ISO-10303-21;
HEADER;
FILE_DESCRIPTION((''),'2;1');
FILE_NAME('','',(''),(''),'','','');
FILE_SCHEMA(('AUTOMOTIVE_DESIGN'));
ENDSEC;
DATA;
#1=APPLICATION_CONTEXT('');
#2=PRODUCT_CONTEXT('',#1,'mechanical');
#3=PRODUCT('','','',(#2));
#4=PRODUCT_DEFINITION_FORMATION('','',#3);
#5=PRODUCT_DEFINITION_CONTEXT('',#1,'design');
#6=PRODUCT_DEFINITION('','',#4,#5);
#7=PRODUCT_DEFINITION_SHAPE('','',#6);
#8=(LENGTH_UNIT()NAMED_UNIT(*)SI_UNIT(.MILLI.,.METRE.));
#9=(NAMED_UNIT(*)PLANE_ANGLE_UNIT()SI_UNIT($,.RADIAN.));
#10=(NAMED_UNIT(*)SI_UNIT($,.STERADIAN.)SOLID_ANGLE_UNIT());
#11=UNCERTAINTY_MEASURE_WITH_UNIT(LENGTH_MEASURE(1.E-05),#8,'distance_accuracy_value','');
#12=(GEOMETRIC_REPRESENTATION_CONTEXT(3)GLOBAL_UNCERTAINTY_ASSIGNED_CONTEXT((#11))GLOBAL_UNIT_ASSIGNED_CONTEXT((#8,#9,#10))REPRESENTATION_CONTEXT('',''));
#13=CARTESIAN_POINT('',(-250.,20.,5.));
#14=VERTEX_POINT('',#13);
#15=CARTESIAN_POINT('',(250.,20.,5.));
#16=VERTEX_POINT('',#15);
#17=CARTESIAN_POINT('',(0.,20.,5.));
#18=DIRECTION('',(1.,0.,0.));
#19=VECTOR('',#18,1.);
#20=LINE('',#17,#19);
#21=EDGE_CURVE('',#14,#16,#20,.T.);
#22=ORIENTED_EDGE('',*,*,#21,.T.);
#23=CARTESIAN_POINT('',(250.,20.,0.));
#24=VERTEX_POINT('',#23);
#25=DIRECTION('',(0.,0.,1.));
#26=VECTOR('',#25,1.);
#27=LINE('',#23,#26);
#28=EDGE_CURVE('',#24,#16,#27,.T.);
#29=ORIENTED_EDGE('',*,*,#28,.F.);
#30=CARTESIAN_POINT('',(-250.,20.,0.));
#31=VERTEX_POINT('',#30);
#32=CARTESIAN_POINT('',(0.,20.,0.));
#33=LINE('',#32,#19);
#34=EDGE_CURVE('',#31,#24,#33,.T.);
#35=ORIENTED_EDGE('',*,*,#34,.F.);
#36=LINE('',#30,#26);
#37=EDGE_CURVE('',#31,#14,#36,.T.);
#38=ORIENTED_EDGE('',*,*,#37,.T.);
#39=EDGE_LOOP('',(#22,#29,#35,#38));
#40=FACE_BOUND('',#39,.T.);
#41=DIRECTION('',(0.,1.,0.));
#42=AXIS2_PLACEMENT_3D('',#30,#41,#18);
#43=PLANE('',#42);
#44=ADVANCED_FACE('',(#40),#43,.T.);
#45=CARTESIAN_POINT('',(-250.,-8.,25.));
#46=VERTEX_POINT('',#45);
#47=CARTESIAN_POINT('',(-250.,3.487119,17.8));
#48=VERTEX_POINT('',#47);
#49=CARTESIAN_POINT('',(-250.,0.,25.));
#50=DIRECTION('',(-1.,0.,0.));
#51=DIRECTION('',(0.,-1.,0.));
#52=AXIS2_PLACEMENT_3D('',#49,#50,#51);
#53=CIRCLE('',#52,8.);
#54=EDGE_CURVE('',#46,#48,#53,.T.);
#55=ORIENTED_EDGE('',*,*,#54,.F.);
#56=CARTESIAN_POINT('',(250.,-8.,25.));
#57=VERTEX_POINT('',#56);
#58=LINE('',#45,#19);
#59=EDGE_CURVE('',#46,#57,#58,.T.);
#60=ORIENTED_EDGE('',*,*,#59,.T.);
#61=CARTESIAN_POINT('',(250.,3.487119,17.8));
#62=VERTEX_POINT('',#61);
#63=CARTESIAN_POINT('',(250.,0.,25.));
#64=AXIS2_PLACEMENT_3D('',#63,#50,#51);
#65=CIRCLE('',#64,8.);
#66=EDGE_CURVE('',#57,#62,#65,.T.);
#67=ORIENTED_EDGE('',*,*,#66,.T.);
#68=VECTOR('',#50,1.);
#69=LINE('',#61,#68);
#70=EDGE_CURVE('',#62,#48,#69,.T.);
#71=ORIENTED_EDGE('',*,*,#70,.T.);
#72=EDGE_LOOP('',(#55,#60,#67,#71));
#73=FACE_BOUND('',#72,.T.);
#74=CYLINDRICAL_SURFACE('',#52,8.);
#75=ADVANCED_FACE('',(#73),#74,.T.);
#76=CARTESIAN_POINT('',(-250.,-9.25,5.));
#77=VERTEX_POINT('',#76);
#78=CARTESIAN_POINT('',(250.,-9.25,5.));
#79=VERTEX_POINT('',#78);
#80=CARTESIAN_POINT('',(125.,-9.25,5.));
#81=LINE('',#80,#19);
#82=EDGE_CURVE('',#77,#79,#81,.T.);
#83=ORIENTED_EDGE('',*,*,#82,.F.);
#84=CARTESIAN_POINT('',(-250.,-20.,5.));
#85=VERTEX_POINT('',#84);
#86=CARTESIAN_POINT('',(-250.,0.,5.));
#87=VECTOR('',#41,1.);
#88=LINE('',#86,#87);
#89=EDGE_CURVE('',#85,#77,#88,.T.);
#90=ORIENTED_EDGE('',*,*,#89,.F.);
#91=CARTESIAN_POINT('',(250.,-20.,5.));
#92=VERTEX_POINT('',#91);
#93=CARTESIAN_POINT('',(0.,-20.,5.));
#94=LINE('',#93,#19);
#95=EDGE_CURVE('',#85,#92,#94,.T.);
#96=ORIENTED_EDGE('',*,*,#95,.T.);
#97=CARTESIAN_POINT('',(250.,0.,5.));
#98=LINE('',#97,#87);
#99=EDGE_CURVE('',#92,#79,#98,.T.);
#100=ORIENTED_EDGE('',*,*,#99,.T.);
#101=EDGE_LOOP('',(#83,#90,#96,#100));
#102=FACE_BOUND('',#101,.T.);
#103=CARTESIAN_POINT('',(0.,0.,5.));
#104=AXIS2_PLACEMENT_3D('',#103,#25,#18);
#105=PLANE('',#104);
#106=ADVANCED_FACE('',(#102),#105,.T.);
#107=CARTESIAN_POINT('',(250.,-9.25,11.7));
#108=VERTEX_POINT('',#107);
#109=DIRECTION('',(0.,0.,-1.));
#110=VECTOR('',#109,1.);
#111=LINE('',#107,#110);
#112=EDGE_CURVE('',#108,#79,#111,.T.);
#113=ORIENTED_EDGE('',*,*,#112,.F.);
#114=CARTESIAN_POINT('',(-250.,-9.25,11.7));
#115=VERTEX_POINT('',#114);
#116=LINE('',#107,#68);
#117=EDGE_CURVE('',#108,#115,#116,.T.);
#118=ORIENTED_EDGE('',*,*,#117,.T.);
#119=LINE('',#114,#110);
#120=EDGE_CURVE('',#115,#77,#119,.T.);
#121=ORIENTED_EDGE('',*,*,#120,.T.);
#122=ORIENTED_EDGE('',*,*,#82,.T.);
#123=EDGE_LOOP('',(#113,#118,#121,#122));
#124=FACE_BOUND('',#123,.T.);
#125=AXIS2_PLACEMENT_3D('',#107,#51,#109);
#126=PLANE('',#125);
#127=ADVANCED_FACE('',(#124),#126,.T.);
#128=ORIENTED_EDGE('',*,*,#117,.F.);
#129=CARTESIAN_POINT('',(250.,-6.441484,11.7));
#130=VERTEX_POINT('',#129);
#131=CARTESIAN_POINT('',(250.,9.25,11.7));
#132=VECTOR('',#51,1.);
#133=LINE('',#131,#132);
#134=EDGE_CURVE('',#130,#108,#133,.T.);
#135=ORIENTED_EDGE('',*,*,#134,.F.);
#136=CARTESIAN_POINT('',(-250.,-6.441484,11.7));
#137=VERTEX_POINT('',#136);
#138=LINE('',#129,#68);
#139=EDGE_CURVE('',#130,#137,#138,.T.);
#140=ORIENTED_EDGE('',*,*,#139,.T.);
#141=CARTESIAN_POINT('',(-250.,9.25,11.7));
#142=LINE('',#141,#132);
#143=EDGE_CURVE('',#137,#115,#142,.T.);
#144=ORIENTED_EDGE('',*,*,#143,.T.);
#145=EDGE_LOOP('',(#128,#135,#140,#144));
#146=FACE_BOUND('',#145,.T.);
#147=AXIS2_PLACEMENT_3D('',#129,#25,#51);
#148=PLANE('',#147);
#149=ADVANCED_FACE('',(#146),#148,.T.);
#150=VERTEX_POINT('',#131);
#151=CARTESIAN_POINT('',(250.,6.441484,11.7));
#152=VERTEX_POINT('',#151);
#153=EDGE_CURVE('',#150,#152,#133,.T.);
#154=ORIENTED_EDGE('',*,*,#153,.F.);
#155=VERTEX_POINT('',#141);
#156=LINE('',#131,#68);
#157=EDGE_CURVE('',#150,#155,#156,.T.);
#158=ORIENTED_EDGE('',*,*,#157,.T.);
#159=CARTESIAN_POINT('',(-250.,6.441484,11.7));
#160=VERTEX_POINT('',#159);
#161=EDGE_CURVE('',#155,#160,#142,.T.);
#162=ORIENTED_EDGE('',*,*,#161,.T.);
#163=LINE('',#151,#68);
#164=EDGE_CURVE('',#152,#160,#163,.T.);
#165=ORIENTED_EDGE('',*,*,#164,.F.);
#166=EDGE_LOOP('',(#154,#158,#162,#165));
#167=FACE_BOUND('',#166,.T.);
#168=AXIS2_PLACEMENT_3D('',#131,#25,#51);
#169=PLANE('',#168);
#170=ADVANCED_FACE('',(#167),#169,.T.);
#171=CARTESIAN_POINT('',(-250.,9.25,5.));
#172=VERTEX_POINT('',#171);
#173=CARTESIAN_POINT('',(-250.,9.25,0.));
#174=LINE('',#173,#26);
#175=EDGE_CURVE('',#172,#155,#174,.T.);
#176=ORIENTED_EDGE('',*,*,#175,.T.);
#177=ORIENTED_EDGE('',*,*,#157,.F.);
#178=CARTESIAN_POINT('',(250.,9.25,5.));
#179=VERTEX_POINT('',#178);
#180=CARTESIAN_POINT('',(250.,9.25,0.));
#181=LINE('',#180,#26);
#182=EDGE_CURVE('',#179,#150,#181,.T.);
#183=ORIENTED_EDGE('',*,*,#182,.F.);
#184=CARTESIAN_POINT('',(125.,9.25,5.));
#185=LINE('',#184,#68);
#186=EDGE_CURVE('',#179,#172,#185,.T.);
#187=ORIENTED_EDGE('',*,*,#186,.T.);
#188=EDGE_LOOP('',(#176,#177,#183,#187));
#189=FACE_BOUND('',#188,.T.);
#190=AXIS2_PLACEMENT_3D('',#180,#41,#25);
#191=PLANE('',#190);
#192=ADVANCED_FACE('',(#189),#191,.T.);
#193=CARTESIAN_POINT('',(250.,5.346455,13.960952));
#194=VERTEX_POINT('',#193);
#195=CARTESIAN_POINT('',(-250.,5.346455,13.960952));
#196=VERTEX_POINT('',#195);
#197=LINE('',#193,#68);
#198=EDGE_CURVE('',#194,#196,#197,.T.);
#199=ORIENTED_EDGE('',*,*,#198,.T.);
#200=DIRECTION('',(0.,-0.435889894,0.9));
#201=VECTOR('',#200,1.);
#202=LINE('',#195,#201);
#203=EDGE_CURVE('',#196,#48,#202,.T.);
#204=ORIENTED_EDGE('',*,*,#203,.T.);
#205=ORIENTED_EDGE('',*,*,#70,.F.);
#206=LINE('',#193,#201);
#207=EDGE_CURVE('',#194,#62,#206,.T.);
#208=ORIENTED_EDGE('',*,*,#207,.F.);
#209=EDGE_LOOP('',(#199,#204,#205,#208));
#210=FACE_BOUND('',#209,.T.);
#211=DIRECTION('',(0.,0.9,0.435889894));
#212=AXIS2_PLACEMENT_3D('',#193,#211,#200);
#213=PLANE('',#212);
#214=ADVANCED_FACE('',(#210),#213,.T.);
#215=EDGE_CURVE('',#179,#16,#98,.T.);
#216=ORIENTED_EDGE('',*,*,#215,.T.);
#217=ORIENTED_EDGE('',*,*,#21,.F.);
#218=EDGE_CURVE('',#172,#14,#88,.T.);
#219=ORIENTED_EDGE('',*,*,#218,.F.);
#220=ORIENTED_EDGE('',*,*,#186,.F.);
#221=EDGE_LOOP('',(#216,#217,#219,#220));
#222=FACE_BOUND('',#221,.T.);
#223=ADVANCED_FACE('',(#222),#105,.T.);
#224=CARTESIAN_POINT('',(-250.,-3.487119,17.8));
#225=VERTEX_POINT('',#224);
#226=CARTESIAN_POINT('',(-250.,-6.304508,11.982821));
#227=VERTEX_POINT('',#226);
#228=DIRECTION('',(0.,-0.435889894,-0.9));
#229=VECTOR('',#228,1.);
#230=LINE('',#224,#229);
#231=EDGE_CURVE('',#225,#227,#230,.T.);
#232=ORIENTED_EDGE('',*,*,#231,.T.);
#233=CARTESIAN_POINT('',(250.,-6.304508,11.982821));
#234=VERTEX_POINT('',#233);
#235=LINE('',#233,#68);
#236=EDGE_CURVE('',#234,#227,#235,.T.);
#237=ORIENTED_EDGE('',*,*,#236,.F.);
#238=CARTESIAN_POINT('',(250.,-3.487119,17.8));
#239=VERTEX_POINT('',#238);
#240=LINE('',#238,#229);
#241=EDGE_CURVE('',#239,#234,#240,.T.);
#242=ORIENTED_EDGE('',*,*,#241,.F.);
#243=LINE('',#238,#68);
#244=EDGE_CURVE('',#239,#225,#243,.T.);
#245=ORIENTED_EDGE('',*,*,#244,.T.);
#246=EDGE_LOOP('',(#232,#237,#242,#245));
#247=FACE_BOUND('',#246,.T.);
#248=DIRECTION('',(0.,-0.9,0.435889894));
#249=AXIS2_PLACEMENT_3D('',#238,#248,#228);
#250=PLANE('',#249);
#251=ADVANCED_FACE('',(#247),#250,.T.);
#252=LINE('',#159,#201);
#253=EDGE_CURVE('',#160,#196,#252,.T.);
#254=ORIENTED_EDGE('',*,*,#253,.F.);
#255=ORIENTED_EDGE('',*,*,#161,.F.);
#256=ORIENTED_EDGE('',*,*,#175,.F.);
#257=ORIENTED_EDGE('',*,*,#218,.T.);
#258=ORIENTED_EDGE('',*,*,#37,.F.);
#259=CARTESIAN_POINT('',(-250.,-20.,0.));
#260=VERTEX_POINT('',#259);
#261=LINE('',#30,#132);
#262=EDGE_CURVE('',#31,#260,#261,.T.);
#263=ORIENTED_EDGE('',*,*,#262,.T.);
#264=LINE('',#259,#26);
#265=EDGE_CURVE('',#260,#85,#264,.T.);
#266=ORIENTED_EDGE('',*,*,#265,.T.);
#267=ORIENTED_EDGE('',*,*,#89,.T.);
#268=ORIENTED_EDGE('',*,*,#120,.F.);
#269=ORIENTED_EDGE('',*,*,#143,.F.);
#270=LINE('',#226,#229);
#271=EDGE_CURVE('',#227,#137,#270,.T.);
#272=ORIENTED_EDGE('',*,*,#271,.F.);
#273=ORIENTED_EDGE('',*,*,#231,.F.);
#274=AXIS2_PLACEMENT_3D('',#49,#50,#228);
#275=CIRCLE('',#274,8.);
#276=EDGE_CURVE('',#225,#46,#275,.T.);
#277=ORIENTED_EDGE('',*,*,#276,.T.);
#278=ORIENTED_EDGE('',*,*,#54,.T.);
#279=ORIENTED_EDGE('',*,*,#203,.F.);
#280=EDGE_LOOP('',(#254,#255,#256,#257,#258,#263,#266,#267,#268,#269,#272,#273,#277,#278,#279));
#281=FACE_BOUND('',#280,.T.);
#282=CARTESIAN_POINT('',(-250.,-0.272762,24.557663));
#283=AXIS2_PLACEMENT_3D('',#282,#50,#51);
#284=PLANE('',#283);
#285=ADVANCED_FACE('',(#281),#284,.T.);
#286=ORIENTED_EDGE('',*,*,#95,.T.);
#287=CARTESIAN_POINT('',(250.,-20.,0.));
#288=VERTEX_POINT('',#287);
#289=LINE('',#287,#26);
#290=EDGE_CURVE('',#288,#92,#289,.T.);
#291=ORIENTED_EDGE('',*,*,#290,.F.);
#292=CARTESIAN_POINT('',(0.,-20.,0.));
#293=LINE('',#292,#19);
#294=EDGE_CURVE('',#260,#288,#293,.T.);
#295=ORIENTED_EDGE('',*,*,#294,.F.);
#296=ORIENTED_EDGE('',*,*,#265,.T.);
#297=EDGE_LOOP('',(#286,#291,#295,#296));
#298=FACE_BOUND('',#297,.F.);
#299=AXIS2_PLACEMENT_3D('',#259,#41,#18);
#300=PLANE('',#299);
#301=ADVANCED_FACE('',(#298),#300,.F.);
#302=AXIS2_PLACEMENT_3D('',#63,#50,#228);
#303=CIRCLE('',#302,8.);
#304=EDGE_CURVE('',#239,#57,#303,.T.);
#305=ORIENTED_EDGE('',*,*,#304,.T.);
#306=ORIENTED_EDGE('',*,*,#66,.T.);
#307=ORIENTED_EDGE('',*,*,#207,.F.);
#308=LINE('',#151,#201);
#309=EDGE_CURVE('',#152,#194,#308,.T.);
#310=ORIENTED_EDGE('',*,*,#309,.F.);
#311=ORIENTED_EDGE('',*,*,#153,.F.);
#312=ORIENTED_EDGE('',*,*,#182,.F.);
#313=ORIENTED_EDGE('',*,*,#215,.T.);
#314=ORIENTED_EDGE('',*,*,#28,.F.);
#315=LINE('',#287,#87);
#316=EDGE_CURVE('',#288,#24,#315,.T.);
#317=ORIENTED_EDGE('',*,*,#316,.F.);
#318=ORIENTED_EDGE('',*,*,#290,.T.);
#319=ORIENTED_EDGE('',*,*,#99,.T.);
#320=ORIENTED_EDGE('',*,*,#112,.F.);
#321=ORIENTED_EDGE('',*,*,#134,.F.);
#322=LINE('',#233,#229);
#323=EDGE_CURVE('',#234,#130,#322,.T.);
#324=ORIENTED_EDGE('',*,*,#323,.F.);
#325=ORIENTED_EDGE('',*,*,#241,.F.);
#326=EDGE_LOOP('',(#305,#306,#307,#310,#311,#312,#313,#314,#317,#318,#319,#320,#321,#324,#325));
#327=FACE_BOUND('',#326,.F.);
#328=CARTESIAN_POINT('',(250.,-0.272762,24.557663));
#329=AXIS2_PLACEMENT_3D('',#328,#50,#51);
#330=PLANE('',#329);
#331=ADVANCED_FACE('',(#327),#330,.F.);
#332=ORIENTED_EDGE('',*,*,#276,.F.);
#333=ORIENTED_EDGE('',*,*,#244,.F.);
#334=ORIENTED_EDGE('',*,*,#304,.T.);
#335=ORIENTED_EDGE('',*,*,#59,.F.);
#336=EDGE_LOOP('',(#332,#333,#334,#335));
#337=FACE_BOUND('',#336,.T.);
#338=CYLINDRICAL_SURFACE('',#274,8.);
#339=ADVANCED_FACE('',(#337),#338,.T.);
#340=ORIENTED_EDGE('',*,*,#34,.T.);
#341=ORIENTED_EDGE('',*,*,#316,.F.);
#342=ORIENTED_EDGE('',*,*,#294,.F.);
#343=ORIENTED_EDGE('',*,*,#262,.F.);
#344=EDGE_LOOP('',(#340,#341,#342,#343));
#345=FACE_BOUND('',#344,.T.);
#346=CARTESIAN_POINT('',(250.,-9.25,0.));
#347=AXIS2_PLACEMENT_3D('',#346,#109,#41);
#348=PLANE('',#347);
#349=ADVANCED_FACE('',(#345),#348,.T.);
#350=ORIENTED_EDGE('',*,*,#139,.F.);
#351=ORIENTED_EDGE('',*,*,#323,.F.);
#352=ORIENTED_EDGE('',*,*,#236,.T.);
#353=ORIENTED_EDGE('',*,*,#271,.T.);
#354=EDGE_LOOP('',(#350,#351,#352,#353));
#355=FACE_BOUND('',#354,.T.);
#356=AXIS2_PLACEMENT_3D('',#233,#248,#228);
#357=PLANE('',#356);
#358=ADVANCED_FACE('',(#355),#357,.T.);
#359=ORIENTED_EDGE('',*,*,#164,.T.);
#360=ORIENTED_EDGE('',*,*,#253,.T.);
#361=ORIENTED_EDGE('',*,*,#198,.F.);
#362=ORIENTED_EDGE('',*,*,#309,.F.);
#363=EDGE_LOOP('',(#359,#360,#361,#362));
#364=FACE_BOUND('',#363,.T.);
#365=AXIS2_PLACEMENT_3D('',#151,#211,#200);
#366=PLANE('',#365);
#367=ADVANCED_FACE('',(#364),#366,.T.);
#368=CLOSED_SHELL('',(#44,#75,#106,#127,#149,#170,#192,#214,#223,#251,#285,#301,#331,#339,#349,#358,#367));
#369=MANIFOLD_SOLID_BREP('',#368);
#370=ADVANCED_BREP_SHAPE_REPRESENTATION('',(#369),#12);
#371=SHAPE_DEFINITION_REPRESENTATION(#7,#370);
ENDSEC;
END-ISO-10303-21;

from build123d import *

# Parameters (mm, degrees)
F0_W     = 500
F0_H     = 40
F1_DEPTH = 5
F3_DEPTH = 500
F5_DEPTH = 500


with BuildPart() as f1:
    # F0 (on Top) → F1 (new body)
    with BuildSketch(Plane.XY):
        Rectangle(F0_W, F0_H)
    extrude(amount=F1_DEPTH)

    # F2 (on face) → F3 (join, through all)
    with BuildSketch(Plane.YZ.offset(250)):
        Polygon((-9.25, 11.7), (-9.25, 0), (9.25, 0), (9.25, 11.7), (6.4414839943, 11.7), (-6.4414839943, 11.7), align=None)
        with BuildLine():
            Line((-6.3045076751, 11.9828207053), (-6.4414839943, 11.7))
            Line((-6.4414839943, 11.7), (6.4414839943, 11.7))
            Line((6.4414839943, 11.7), (5.346455176, 13.9609515597))
            Line((5.346455176, 13.9609515597), (3.4871191548, 17.8))
            ThreePointArc((3.4871191548, 17.8), (0, 17), (-3.4871191548, 17.8))
            Line((-3.4871191548, 17.8), (-6.3045076751, 11.9828207053))
        make_face()
    extrude(amount=-F3_DEPTH)

    # F4 (on face) → F5 (join, through all)
    with BuildSketch(Plane(origin=(-250, 0, 0), x_dir=(0, -1, 0), z_dir=(-1, 0, 0))):
        with BuildLine():
            ThreePointArc((3.4871191548, 17.8), (6.7785305649, 20.7512915632), (8, 25))
            ThreePointArc((8, 25), (-4.2487084368, 31.7785305649), (-3.4871191548, 17.8))
            ThreePointArc((-3.4871191548, 17.8), (0, 17), (3.4871191548, 17.8))
        make_face()
    extrude(amount=-F5_DEPTH)


solid = f1.part
